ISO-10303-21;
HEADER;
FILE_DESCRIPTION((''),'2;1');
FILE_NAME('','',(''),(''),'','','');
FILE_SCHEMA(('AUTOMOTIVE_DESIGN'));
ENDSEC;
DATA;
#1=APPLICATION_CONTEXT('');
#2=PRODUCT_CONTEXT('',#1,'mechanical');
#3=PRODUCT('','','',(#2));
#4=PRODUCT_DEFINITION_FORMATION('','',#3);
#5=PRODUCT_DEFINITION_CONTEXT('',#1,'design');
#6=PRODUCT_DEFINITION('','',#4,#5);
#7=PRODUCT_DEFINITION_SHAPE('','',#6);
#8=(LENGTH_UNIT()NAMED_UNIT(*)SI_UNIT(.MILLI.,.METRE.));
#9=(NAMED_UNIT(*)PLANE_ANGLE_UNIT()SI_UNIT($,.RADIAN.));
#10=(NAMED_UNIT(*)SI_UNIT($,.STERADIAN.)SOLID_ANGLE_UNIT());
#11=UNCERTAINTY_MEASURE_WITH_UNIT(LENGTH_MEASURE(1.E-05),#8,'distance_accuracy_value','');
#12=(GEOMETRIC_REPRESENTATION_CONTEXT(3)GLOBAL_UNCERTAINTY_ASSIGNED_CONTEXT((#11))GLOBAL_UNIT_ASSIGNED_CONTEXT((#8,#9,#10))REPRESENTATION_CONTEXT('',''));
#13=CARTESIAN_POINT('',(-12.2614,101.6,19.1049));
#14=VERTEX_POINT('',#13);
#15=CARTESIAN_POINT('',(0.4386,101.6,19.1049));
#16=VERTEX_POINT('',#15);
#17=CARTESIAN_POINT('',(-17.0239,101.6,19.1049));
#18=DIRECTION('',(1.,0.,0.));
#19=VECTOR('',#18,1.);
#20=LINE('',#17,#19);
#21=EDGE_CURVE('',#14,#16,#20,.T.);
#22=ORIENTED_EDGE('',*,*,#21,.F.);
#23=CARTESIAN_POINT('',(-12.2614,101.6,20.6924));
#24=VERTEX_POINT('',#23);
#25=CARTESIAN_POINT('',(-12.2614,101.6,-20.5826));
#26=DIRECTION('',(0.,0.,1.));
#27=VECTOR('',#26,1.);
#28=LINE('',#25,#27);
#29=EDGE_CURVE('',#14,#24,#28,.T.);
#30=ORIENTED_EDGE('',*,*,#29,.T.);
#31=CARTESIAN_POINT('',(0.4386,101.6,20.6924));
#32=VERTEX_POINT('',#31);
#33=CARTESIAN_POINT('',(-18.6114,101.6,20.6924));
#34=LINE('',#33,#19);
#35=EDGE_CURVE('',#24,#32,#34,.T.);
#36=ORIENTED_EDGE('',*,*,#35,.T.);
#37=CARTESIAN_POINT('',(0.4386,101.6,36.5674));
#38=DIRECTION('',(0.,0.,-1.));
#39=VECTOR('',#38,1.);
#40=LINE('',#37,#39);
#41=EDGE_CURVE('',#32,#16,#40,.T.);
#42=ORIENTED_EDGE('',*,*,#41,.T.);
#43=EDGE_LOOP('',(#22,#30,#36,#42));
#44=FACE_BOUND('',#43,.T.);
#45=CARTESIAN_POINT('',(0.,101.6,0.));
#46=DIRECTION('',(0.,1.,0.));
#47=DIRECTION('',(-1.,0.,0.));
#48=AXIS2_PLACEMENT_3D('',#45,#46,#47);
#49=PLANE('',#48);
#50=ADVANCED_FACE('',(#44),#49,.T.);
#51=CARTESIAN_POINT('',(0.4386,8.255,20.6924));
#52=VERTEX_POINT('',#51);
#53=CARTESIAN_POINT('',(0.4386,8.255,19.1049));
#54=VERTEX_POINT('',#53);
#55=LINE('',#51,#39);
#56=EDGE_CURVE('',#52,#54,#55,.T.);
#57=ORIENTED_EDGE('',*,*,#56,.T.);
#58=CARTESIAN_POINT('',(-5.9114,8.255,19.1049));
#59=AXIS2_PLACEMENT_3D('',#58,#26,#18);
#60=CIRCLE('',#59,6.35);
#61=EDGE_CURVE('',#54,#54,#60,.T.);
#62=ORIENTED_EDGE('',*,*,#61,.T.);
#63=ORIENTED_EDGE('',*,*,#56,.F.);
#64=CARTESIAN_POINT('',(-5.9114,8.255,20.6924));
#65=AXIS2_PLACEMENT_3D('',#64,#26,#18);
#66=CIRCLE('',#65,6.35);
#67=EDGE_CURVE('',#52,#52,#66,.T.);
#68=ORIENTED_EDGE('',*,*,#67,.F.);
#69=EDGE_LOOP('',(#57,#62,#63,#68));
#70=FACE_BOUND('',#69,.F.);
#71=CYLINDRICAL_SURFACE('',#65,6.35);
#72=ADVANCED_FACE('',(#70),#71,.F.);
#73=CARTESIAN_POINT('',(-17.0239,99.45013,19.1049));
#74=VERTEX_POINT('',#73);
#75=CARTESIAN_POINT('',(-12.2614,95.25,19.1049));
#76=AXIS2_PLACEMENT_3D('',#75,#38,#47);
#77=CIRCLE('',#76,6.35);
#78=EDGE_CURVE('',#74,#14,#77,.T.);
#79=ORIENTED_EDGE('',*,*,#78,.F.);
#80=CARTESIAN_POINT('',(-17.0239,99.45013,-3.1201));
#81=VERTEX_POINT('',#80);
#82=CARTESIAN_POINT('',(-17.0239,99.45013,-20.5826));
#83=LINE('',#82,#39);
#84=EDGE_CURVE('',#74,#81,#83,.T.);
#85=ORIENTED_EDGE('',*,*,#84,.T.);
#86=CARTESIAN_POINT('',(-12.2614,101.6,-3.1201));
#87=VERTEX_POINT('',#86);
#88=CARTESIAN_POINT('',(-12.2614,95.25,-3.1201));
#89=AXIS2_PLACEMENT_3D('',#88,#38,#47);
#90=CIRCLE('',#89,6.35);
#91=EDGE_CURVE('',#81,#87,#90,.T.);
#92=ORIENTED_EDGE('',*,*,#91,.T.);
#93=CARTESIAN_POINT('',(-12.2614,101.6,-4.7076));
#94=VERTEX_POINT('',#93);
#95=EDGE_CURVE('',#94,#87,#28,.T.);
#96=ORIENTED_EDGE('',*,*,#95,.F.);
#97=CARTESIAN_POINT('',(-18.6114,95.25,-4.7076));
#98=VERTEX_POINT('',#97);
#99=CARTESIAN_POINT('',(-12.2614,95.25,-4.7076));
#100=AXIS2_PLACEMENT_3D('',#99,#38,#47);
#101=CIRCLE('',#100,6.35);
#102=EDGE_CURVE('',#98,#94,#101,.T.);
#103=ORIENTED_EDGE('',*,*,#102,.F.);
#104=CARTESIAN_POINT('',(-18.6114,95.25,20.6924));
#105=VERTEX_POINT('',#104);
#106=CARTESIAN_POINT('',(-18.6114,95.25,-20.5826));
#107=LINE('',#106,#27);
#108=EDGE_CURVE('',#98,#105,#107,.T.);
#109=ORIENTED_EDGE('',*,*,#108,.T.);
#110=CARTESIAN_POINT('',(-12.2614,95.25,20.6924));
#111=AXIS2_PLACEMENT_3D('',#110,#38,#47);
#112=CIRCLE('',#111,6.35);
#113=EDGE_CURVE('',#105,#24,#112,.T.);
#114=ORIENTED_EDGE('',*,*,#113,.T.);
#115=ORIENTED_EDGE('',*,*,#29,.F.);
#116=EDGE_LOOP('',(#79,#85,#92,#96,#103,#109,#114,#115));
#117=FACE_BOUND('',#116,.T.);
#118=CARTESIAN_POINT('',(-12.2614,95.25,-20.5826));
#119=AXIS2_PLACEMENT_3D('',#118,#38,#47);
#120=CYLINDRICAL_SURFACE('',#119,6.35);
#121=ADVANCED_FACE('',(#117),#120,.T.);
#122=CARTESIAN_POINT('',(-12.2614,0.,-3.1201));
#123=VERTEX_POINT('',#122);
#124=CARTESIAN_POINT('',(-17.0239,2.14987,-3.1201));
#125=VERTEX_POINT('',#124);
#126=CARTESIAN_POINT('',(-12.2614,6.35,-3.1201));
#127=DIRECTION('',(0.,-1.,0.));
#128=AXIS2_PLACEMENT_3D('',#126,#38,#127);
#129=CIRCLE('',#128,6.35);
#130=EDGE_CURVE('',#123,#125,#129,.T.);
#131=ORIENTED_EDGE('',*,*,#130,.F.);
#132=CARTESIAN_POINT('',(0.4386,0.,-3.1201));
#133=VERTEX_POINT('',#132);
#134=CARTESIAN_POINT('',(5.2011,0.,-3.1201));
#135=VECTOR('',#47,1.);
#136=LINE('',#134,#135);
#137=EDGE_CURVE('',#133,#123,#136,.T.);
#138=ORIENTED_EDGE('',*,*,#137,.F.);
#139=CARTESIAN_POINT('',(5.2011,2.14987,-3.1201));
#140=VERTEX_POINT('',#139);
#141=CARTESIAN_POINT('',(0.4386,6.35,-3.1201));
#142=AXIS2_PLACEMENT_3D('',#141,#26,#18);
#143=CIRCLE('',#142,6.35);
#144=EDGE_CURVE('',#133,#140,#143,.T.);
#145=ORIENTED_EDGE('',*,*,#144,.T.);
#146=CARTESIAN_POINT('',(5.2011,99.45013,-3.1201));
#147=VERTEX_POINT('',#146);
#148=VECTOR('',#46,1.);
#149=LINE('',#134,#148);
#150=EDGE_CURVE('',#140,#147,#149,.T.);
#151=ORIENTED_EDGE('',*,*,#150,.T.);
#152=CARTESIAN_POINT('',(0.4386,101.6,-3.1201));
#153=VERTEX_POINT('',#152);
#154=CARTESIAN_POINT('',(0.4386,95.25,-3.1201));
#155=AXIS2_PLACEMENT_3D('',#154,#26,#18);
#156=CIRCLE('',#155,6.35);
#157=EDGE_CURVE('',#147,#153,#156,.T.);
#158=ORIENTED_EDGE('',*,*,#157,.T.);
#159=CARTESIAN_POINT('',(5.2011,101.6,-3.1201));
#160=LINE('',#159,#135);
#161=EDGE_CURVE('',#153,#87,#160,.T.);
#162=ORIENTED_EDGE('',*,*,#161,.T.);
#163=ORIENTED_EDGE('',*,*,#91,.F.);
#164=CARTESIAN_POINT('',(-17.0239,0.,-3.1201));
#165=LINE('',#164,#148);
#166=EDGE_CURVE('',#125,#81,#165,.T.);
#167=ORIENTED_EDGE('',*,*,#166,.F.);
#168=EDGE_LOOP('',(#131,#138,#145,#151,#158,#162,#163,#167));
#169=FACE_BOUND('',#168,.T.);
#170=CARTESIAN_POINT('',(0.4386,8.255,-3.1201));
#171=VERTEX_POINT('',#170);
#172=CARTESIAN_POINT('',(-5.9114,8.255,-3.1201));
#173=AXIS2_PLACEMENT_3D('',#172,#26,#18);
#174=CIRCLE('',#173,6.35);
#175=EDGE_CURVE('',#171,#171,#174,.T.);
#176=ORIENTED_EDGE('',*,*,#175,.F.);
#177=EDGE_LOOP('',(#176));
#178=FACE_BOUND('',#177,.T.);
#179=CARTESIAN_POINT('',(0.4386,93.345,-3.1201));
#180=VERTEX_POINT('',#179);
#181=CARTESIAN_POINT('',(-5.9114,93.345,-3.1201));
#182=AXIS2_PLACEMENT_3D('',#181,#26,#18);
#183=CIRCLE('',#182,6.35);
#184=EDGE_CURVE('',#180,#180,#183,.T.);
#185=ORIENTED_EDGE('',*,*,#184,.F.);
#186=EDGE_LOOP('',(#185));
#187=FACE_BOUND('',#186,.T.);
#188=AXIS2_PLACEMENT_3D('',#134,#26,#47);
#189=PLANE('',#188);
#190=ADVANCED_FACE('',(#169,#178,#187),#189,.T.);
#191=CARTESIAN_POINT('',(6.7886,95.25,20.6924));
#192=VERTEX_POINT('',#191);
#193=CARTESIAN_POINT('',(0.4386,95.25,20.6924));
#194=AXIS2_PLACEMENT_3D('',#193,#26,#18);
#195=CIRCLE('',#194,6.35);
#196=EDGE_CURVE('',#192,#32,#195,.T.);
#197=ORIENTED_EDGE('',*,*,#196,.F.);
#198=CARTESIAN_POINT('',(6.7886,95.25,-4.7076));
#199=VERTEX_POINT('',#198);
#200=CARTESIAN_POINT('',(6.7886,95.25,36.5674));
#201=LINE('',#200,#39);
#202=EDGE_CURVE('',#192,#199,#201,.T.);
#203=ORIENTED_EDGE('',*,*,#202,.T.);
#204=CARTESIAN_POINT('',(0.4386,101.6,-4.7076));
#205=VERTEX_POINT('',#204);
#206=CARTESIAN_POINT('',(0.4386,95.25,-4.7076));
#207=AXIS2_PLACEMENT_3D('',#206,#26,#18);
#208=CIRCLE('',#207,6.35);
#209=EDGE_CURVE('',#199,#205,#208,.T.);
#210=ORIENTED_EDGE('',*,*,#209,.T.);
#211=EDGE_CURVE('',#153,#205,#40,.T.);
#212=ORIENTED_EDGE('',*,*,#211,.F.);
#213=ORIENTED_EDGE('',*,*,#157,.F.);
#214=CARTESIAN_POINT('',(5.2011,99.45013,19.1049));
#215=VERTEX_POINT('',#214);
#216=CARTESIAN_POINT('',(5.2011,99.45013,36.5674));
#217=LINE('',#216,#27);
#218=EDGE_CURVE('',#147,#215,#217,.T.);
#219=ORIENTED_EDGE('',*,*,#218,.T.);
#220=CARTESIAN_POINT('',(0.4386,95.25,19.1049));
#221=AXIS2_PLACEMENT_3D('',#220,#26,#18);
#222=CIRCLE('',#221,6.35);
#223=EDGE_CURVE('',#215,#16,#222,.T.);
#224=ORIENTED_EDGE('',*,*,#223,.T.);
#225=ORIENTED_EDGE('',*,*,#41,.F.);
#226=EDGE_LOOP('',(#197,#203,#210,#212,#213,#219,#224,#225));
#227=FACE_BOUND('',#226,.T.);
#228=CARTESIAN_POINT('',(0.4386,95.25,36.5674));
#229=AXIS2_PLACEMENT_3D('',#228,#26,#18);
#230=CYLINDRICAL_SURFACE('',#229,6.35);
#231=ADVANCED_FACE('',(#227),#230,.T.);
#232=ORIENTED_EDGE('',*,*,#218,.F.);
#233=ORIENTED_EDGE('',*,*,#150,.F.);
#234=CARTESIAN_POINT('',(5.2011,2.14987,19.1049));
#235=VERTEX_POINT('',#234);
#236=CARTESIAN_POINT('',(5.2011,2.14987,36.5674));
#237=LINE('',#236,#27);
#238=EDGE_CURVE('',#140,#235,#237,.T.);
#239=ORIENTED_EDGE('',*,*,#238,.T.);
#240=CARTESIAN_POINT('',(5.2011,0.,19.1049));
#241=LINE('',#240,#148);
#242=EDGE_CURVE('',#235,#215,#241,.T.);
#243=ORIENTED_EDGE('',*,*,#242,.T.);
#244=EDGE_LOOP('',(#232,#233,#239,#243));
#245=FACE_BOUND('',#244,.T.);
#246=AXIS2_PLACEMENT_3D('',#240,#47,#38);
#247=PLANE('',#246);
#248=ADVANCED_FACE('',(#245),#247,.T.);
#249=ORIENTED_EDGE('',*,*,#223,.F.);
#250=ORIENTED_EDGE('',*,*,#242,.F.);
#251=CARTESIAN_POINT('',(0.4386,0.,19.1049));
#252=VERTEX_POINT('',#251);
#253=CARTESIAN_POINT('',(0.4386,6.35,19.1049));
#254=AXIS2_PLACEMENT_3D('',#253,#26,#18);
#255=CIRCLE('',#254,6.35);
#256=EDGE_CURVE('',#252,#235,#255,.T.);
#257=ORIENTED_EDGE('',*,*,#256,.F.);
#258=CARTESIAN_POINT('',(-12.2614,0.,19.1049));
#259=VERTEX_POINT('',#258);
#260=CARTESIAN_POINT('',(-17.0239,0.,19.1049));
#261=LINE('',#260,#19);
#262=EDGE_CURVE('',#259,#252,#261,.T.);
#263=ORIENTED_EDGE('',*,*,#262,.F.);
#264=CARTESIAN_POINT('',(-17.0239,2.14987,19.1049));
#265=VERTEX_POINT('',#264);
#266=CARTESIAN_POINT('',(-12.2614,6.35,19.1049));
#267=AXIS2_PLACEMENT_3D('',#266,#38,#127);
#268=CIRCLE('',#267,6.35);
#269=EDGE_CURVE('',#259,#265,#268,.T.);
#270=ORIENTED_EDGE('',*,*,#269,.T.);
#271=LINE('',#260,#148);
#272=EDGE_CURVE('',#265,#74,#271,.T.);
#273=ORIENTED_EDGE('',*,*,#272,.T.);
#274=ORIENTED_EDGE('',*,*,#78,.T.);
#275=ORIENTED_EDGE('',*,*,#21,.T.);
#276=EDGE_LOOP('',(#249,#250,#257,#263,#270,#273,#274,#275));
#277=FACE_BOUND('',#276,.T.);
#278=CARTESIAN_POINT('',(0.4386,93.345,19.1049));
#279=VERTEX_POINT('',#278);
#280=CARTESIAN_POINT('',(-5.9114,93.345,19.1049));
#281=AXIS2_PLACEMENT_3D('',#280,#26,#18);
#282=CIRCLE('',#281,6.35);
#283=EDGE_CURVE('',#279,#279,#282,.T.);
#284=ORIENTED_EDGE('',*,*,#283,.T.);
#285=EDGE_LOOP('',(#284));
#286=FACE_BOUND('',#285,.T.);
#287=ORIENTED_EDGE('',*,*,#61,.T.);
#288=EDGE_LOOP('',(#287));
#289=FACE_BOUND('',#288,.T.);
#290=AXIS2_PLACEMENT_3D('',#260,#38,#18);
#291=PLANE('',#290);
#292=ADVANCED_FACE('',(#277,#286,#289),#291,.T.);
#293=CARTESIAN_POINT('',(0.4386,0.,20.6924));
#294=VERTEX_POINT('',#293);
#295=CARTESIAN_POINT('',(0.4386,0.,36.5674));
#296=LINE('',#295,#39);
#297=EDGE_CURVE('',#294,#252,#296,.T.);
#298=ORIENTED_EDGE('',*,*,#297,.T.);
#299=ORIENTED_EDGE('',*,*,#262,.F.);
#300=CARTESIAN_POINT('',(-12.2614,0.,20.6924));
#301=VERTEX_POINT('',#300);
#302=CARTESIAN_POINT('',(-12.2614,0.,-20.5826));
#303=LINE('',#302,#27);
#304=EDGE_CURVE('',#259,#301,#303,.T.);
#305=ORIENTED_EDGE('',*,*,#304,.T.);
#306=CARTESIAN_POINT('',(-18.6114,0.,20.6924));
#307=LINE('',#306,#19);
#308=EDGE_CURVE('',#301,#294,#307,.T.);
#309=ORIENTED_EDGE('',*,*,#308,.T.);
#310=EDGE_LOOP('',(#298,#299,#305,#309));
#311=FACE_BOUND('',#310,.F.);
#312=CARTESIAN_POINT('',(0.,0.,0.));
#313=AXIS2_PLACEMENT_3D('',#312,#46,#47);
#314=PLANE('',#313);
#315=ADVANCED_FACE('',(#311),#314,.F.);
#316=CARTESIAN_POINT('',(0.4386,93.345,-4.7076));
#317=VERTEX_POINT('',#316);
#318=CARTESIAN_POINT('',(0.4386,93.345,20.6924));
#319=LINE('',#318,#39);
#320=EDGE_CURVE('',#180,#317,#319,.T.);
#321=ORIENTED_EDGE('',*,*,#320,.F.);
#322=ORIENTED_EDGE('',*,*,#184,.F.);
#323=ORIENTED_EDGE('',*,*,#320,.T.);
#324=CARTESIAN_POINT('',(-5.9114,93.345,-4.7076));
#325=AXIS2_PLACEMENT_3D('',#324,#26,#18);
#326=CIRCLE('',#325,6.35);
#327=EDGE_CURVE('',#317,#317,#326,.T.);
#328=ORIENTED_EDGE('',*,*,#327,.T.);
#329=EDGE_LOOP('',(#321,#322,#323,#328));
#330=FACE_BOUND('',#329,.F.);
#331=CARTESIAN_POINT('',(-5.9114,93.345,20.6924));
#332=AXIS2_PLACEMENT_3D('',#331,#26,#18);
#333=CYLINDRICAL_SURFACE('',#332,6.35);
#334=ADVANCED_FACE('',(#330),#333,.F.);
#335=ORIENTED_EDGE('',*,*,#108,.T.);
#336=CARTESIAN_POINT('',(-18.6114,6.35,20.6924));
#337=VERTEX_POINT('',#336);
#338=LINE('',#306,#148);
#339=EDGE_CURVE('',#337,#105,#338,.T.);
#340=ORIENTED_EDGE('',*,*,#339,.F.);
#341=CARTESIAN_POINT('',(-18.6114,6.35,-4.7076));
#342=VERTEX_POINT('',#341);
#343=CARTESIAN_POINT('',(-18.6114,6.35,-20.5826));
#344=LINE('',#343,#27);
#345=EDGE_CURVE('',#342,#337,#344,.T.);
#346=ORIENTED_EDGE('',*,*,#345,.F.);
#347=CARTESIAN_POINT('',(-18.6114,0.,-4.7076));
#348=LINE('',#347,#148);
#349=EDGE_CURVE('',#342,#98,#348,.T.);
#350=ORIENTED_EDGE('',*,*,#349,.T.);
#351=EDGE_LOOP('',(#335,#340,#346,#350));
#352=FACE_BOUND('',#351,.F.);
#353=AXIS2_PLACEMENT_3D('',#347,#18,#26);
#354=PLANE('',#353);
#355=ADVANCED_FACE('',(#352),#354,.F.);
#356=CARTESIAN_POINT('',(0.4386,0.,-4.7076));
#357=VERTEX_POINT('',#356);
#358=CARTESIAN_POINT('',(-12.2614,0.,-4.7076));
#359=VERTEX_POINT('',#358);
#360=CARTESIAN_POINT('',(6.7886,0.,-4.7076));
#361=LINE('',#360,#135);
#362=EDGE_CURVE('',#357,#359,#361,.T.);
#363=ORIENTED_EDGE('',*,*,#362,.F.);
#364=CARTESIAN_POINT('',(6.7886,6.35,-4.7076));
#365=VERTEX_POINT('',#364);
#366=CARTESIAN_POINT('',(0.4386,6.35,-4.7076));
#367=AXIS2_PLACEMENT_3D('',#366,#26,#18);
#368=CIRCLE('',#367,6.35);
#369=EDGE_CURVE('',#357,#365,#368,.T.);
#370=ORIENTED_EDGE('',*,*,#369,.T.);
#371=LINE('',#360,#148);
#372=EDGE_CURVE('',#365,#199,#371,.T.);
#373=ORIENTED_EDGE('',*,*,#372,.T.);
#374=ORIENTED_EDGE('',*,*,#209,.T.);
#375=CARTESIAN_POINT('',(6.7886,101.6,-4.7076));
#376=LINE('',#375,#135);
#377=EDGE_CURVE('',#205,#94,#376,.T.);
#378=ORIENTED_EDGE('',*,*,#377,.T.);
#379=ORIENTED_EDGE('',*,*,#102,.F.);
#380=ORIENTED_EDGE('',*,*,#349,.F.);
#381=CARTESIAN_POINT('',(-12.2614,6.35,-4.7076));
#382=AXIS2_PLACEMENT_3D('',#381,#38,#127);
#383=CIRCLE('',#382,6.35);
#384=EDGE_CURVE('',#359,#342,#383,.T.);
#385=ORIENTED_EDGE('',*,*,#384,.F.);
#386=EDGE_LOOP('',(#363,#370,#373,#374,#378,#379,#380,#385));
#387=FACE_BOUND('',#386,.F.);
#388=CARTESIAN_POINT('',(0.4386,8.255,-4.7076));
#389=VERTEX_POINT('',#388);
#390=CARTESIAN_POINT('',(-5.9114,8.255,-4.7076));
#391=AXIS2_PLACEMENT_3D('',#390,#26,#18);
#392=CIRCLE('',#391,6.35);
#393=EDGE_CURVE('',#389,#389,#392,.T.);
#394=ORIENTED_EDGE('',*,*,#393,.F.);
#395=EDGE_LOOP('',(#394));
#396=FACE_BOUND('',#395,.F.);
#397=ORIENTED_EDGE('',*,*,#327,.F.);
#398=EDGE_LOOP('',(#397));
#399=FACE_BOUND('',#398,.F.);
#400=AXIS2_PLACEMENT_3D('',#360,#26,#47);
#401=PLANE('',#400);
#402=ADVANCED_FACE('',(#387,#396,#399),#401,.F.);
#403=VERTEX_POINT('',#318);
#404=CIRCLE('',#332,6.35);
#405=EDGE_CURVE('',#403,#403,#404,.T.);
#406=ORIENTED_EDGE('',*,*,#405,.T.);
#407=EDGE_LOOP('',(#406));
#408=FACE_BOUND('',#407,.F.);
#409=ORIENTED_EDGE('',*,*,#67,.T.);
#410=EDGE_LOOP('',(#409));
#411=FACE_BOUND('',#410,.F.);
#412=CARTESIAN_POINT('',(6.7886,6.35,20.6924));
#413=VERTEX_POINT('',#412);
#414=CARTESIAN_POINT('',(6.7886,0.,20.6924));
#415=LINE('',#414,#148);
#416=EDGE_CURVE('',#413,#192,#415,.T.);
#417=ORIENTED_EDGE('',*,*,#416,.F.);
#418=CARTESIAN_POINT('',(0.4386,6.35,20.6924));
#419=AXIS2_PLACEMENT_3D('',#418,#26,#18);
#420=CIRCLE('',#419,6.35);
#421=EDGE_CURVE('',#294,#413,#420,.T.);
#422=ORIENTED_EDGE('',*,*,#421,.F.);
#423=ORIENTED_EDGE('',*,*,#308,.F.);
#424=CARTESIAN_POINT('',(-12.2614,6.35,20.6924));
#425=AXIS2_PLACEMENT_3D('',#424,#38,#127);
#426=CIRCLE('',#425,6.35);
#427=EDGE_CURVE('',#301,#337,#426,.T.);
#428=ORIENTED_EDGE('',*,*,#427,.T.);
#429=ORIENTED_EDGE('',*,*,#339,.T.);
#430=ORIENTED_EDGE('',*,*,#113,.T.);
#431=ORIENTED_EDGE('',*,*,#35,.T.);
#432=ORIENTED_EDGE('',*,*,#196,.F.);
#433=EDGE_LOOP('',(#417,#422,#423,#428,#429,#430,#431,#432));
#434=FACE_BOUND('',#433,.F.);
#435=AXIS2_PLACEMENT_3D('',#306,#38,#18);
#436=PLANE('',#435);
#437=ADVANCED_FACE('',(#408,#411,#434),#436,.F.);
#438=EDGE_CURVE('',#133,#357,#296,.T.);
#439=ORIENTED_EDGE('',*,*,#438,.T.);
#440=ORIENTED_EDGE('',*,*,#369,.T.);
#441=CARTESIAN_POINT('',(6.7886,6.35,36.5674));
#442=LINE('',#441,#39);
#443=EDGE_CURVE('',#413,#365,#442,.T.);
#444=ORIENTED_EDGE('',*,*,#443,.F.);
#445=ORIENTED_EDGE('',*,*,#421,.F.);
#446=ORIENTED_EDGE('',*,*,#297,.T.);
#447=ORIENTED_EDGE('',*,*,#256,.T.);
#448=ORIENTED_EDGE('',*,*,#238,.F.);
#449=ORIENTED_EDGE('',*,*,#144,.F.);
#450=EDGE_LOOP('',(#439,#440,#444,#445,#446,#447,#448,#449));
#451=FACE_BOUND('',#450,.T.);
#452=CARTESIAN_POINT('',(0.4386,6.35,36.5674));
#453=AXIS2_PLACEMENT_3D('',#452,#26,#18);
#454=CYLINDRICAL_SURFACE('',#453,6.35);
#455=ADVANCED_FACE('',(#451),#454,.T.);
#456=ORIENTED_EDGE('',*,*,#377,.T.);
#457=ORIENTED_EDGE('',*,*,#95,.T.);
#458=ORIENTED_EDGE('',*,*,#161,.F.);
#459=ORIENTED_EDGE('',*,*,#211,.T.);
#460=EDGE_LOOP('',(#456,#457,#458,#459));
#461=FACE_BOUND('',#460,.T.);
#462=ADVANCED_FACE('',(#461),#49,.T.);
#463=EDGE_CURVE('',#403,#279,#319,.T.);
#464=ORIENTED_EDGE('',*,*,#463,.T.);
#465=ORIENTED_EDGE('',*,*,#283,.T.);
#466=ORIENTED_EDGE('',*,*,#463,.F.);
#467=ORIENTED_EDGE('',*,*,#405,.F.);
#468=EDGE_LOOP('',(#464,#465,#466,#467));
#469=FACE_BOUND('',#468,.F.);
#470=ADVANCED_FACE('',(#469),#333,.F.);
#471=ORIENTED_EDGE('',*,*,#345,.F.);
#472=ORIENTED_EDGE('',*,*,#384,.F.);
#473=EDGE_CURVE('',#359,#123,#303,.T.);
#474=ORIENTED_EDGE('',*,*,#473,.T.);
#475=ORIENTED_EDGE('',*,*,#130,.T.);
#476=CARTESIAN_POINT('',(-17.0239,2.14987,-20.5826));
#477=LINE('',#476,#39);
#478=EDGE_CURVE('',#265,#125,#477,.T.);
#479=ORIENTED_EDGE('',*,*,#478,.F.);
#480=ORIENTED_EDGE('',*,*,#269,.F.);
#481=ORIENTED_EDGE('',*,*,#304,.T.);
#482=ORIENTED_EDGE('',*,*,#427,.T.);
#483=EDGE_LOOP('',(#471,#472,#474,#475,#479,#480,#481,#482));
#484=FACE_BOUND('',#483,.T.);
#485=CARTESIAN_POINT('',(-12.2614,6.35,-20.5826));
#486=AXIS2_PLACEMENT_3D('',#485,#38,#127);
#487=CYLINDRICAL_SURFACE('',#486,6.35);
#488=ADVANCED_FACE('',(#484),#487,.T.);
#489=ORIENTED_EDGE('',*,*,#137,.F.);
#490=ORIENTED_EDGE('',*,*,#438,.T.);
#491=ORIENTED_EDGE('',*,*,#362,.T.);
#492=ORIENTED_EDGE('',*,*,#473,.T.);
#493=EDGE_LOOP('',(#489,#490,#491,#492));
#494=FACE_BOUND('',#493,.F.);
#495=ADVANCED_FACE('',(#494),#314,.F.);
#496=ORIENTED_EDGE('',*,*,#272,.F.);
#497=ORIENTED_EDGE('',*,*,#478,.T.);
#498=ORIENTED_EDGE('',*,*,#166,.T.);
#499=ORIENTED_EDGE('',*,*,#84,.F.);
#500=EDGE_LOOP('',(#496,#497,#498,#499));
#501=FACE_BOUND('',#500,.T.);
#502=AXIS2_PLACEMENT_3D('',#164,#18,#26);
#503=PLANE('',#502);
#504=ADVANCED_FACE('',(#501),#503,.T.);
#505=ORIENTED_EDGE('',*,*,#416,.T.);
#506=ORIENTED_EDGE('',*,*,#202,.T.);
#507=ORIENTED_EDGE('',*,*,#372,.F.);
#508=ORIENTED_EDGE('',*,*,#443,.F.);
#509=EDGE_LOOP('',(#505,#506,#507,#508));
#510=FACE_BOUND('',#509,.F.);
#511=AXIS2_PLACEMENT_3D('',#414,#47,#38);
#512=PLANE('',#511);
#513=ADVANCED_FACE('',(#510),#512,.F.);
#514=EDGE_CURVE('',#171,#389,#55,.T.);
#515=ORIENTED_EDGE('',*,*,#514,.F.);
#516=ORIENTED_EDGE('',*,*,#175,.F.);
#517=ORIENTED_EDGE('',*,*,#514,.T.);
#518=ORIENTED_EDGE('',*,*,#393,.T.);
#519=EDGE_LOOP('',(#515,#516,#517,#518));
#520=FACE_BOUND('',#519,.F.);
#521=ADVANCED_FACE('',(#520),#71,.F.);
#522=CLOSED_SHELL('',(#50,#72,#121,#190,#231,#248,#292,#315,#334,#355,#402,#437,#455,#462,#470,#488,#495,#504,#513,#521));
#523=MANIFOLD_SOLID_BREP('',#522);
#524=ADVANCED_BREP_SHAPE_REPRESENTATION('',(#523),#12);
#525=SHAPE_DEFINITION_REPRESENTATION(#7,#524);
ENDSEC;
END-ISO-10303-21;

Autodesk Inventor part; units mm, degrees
ref_plane "YZ Plane" through (0, 0, 0) normal (1, 0, 0) x (0, 1, 0)
ref_plane "XZ Plane" through (0, 0, 0) normal (0, 1, 0) x (-1, 0, 0)
ref_plane "XY Plane" through (0, 0, 0) normal (0, 0, 1) x (1, 0, 0)
sketch "Sketch1" plane through (0, 0, 0) normal (0, 1, 0) x (-1, 0, 0)
  line L0 (-6.7886, -4.7076) -> (18.6114, -4.7076)
  line L1 (18.6114, -4.7076) -> (18.6114, 20.6924)
  line L2 (18.6114, 20.6924) -> (-6.7886, 20.6924)
  line L3 (-6.7886, 20.6924) -> (-6.7886, -4.7076)
  line L4 (-5.2011, -3.1201) -> (17.0239, -3.1201)
  line L5 (17.0239, -3.1201) -> (17.0239, 19.1049)
  line L6 (17.0239, 19.1049) -> (-5.2011, 19.1049)
  line L7 (-5.2011, 19.1049) -> (-5.2011, -3.1201)
  point P0 (0, 0)
  dimension "d0" = 25.4
  dimension "d1" = 25.4
  dimension "d2" = 1.5875
  dimension "d3" = 1.5875
  dimension "d4" = 1.5875
  dimension "d5" = 1.5875
extrude "Extrusion1" add sketch "Sketch1" along normal blind 101.6
sketch "Sketch2" plane through (-18.6114, 0, 20.6924) normal (0, 0, 1) x (1, 0, 0)
  circle A0 centre (12.7, 8.255) radius 6.35
  circle A1 centre (12.7, 93.345) radius 6.35
  point P0 (25.4, 0)
  point P1 (25.4, 101.6)
  point P2 (18.6114, 0)
  dimension "d8" = 12.7
  dimension "d9" = 12.7
  dimension "d10" = 8.255
  dimension "d11" = 8.255
extrude "Extrusion2" cut sketch "Sketch2" against normal blind 101.6
fillet "Fillet1" radius 6.35 1 edges at (6.7886, 101.6, 7.9924)
fillet "Fillet2" radius 6.35 3 edges at (-18.6114, 101.6, 7.9924) (6.7886, 0, 7.9924) (-18.6114, 0, 7.9924)
equation "\"d3\" = d2"
equation "\"d4\" = d2"
equation "\"d5\" = d2"
equation "\"d11\" = d10"
properties part number "4inLink"
